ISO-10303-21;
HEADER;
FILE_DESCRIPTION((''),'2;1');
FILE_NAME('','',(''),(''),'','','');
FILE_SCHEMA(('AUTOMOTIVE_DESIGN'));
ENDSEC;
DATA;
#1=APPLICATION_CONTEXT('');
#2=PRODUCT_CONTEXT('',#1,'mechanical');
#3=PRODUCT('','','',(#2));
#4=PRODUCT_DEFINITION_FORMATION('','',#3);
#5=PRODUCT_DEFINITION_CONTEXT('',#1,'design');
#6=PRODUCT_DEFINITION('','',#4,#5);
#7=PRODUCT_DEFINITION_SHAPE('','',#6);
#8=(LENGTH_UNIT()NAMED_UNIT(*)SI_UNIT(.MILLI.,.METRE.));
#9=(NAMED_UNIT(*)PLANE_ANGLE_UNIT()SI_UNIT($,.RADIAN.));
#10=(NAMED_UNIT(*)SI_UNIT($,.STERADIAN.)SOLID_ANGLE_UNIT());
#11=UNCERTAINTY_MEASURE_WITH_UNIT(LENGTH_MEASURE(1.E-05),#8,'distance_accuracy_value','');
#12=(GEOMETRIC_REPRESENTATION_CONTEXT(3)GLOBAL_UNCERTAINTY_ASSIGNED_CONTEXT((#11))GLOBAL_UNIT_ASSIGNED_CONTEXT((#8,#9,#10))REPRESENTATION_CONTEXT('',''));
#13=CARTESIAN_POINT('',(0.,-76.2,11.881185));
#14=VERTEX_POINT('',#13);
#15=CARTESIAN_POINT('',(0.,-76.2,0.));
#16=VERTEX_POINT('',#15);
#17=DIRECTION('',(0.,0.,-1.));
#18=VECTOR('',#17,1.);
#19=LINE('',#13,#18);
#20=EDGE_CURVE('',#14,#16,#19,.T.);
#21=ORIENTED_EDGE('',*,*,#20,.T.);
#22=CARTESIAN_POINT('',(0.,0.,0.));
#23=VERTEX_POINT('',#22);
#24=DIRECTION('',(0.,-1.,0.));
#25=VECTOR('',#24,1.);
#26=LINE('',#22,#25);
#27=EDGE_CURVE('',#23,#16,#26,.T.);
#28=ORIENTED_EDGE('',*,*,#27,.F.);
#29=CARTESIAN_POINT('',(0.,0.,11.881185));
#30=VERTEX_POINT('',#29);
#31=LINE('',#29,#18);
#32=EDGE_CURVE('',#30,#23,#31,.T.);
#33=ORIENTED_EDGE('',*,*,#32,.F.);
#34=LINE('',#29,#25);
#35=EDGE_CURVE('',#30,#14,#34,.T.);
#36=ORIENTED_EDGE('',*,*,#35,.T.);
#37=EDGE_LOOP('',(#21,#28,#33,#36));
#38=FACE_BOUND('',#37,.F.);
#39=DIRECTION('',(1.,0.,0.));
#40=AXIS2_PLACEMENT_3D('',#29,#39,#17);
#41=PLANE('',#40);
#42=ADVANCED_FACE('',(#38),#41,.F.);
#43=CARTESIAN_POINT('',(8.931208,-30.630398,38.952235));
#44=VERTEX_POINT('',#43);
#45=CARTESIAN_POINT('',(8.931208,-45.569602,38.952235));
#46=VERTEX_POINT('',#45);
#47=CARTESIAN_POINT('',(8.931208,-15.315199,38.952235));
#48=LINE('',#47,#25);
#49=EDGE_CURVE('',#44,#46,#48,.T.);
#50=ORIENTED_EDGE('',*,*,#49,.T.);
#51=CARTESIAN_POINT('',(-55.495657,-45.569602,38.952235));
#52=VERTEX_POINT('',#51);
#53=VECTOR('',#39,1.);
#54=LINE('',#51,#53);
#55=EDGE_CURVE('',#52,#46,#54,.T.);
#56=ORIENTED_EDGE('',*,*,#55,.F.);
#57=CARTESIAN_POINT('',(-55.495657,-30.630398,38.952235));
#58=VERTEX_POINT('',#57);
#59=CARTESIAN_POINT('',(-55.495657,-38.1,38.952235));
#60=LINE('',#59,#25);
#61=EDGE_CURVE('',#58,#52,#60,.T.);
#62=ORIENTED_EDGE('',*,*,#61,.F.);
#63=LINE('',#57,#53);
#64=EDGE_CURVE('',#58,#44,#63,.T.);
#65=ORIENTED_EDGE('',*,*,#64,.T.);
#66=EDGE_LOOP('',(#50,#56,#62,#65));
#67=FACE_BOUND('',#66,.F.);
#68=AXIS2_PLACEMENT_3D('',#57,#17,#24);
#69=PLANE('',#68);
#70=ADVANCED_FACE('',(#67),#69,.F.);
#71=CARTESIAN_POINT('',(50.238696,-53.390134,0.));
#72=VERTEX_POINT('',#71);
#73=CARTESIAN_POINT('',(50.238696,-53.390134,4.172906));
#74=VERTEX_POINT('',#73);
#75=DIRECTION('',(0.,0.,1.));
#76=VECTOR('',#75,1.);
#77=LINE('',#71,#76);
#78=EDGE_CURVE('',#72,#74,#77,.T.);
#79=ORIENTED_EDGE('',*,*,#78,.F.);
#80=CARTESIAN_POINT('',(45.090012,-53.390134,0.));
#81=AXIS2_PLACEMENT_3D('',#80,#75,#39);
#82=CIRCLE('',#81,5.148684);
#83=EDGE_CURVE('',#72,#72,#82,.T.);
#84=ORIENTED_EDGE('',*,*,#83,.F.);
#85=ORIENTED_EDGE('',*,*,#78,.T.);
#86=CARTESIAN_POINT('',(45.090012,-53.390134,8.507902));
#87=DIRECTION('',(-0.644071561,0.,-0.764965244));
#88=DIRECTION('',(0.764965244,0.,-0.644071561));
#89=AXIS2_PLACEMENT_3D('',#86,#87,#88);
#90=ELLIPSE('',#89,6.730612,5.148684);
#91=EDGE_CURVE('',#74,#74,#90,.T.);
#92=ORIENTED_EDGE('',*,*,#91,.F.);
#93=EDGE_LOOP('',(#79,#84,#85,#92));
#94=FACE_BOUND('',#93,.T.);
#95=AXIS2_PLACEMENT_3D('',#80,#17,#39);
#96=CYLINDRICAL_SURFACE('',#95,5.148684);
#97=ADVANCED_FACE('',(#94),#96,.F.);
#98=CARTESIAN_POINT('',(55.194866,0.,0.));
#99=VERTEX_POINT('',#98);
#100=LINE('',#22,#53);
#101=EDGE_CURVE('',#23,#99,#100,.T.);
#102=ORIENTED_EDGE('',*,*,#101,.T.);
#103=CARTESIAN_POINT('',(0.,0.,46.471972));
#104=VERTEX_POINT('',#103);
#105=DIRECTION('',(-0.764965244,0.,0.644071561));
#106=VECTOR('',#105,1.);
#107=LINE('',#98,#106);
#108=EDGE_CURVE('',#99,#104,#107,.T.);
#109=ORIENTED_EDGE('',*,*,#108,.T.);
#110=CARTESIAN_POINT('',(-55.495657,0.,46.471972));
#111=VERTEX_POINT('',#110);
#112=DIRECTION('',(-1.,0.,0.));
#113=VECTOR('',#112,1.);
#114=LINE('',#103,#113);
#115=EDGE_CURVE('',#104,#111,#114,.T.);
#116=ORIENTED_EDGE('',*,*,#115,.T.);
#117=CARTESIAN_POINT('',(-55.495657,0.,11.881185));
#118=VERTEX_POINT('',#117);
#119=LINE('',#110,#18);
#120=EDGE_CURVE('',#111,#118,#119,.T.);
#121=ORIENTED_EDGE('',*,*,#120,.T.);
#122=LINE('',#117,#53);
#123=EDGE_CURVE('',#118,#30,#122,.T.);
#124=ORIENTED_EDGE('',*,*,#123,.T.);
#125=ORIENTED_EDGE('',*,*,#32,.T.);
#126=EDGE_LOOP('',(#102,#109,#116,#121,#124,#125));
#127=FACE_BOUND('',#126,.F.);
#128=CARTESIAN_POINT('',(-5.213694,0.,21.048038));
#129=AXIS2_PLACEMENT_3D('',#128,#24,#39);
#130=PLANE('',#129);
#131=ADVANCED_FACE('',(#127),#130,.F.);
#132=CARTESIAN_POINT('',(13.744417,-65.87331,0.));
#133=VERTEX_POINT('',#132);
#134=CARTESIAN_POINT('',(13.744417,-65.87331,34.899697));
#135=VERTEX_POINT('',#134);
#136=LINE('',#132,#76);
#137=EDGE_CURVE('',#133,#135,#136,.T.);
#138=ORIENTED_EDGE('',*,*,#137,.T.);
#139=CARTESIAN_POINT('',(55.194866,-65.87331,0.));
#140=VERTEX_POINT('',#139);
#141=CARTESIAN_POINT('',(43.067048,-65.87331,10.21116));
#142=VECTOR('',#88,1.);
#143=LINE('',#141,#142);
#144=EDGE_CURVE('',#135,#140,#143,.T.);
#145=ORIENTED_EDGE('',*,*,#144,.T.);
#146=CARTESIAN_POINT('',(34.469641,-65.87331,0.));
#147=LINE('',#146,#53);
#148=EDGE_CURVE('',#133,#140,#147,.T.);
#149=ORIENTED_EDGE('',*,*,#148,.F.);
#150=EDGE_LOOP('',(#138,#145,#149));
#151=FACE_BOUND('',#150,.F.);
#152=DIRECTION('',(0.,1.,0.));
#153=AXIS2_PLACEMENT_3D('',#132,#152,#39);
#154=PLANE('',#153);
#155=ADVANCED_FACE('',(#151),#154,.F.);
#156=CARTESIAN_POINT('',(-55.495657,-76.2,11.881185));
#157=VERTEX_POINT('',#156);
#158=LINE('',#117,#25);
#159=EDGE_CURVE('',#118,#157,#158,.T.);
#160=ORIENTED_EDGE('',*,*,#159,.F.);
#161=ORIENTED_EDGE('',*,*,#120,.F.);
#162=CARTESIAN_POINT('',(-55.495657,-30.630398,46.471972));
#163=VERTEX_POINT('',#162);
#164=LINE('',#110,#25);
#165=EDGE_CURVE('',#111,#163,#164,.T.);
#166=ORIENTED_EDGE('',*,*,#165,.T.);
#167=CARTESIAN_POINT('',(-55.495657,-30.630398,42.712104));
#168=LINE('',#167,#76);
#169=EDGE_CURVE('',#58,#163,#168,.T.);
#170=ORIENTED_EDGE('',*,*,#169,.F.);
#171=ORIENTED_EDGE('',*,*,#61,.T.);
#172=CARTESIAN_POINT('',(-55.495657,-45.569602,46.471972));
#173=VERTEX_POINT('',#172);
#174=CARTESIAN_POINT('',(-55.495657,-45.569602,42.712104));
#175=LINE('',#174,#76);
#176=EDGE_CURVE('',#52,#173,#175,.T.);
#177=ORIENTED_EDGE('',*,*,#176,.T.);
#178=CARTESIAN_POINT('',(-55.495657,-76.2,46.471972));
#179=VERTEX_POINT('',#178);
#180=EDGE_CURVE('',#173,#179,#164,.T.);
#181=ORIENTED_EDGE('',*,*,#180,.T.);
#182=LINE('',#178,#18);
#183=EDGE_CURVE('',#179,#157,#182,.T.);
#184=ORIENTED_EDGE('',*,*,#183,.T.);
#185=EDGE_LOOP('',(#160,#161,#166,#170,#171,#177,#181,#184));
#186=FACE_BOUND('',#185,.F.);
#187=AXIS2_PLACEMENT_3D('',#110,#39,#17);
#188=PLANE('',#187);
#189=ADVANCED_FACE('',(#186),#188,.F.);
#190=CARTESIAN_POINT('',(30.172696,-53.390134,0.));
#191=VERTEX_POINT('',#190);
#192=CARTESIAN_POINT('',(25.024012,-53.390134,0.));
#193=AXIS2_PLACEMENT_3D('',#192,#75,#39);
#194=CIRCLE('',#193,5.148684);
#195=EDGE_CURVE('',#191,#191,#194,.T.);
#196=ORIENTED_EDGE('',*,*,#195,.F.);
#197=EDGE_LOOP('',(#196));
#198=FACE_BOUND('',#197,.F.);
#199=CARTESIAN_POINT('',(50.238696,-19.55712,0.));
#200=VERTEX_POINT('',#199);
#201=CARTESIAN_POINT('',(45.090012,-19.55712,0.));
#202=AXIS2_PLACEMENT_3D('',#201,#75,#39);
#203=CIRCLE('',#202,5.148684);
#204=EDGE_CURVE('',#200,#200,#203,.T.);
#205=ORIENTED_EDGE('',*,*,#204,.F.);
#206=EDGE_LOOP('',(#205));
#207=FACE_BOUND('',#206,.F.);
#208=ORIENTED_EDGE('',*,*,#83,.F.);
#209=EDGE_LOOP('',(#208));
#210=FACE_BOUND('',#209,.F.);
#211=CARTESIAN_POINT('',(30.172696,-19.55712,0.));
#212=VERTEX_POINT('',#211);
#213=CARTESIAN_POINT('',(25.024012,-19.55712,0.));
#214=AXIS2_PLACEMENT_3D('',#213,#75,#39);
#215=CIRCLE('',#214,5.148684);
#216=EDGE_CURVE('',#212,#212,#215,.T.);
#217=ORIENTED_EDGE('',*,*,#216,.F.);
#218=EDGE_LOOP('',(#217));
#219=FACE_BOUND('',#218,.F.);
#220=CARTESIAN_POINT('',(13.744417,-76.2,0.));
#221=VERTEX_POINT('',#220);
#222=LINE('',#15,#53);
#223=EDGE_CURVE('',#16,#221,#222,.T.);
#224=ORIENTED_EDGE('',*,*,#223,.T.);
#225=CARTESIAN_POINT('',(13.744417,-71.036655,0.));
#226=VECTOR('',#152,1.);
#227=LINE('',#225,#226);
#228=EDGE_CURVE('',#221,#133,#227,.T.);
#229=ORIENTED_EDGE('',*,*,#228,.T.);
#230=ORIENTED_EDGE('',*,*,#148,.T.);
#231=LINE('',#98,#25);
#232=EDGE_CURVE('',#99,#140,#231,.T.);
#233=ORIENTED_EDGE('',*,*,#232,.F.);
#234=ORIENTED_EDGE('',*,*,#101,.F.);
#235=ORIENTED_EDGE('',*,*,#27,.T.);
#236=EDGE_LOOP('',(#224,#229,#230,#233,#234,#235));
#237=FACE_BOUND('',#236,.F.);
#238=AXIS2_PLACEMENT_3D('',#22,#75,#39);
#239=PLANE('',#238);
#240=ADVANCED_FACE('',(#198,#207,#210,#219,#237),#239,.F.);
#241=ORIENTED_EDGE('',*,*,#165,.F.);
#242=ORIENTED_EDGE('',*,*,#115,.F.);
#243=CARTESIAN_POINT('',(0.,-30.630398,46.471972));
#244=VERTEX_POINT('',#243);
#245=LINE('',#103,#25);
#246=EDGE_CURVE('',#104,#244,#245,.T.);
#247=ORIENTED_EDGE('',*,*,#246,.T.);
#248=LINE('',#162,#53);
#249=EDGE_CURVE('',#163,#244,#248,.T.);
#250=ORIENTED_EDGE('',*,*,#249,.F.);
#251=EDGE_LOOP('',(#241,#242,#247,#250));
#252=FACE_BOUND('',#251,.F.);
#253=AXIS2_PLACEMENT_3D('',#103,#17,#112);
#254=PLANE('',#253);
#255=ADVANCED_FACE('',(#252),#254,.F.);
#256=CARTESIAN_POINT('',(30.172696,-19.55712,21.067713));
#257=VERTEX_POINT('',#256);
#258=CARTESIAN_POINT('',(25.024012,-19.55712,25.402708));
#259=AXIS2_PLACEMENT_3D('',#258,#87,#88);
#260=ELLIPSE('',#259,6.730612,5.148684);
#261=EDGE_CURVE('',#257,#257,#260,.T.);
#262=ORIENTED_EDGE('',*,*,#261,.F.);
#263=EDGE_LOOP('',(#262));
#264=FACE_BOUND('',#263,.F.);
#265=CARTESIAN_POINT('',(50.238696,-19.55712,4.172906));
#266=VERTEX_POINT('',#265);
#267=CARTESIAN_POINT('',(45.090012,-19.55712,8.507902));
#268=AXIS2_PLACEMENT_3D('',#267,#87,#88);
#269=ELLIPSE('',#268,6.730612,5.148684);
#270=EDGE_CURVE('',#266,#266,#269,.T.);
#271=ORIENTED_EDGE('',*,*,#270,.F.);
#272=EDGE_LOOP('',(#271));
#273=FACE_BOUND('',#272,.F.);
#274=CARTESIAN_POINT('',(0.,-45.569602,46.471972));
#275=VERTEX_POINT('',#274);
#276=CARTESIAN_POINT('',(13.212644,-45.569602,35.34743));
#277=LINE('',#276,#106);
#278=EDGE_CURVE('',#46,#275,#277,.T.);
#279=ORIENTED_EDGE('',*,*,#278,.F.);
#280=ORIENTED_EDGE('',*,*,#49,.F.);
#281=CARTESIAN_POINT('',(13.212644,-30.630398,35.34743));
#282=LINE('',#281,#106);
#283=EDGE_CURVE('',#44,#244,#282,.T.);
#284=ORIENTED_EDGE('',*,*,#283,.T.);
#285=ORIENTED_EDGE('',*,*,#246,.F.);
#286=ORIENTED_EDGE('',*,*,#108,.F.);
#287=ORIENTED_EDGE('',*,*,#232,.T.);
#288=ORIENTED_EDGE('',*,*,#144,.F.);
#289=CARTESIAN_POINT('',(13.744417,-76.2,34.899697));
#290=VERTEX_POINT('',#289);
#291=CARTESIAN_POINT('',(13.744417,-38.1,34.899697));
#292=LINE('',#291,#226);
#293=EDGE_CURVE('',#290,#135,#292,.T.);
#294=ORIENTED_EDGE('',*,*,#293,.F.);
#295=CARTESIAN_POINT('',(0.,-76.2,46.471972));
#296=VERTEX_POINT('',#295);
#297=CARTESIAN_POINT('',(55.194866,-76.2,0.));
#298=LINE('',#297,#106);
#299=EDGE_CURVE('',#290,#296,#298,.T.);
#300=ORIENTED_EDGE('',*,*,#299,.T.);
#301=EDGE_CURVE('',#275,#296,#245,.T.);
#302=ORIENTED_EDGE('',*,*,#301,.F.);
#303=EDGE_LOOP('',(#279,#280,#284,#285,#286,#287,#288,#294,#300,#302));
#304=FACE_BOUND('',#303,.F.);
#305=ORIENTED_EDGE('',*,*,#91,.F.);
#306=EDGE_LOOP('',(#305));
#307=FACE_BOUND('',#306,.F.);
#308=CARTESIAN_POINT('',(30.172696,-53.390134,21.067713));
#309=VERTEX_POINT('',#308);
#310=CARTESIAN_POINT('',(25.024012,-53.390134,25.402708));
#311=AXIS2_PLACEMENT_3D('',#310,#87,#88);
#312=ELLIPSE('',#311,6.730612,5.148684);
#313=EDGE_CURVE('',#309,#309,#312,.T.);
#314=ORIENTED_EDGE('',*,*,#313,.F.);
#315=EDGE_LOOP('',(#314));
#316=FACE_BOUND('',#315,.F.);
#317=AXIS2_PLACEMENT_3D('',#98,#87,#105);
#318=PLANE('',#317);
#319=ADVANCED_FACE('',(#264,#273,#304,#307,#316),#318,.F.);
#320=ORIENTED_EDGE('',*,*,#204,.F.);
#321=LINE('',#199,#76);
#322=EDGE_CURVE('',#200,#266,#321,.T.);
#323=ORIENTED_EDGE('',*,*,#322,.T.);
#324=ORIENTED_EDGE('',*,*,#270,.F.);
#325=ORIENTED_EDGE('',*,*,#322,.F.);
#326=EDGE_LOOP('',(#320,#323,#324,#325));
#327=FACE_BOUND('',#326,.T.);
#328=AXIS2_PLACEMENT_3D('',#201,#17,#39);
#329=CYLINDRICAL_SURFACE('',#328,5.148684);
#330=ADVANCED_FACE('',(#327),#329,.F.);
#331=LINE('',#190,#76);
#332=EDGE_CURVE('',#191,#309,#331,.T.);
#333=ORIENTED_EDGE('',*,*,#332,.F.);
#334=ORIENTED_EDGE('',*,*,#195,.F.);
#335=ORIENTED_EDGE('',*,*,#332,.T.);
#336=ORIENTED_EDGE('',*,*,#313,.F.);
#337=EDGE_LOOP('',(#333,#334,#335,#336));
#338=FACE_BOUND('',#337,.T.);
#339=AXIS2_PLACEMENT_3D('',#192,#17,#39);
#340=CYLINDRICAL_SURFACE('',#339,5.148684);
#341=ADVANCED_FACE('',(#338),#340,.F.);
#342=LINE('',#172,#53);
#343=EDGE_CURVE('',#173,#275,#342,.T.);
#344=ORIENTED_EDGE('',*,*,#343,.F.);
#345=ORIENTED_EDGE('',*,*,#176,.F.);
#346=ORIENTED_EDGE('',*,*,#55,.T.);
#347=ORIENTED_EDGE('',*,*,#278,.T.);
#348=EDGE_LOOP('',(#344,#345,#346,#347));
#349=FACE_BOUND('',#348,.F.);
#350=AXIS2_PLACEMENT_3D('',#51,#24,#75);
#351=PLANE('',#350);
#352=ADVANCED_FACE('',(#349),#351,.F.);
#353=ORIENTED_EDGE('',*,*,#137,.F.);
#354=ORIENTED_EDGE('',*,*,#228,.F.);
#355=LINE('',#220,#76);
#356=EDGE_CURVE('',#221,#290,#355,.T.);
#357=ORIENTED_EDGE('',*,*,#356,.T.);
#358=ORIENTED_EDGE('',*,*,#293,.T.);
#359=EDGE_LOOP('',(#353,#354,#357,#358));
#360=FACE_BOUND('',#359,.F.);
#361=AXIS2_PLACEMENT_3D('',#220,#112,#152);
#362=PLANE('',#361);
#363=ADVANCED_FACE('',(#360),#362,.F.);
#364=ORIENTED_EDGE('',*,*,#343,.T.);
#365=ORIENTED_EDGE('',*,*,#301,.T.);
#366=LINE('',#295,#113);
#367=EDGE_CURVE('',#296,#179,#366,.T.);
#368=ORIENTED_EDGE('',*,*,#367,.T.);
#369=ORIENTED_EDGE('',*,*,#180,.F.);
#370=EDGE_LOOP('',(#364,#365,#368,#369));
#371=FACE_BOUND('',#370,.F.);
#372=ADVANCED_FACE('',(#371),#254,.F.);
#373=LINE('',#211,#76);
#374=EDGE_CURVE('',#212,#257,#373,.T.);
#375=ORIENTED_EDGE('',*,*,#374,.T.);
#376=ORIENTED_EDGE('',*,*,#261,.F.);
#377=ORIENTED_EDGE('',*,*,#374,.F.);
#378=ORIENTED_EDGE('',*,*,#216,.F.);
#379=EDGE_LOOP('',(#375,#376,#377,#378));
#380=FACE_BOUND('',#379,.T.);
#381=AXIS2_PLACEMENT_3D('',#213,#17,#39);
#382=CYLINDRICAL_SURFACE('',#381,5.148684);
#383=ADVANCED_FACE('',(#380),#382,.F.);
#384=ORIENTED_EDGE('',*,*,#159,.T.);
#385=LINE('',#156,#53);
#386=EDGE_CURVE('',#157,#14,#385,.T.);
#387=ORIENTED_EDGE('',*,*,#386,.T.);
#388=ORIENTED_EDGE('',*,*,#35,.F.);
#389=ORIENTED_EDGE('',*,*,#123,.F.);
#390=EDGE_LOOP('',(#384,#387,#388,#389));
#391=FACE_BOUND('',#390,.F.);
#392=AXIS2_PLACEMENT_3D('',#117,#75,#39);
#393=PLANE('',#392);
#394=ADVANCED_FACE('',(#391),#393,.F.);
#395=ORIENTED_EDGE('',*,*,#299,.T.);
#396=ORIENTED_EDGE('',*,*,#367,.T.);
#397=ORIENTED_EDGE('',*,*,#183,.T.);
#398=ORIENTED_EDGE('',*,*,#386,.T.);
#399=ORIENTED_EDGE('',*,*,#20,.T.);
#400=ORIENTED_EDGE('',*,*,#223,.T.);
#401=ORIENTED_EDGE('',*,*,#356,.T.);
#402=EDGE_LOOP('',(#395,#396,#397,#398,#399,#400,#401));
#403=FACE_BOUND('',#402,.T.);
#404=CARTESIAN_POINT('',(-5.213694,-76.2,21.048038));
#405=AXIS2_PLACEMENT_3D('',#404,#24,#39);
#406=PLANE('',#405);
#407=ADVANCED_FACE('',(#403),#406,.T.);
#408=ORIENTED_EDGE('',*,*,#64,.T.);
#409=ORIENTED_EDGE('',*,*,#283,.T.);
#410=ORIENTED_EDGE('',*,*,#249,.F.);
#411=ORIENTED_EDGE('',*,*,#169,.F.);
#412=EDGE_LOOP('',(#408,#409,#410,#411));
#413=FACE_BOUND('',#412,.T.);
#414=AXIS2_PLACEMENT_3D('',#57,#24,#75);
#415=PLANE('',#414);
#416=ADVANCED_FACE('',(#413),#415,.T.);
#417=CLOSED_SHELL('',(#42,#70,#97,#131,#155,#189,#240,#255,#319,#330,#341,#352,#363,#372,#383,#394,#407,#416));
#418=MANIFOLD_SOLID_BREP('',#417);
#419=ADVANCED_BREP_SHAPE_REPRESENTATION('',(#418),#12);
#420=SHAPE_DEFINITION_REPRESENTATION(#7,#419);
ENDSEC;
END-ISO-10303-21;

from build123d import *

# Parameters (mm, degrees)
F1_DEPTH = 76.2
F2_W     = 14.9392048001
F2_H     = 7.519736886
F3_DEPTH = 110.691522939
F4_W     = 41.4504492655
F4_H     = 10.3266900301
F4_R     = 5.148684062
F5_DEPTH = 188


# Not quite as in the source:
# - an extrude ends at something that could not be found from the text; its depth is read off the source's solid


with BuildPart() as f1:
    # F0 (on Front) → F1 (new body)
    with BuildSketch(Plane.XZ):
        Polygon((0, 11.8811847642), (0, 0), (55.1948659122, 0), (0, 46.4719720185), (-55.4956570268, 46.4719720185), (-55.4956570268, 11.8811847642), align=None)
    extrude(amount=F1_DEPTH)

    # F2 (on face) → F3 (cut, through all)
    with BuildSketch(Plane(origin=(-55.4956570268, 0, 0), x_dir=(0, -1, 0), z_dir=(-1, 0, 0))):
        with Locations((38.1, 42.7121035755)):
            Rectangle(F2_W, F2_H)
    extrude(amount=-F3_DEPTH, mode=Mode.SUBTRACT)

    # F4 (on Top) → F5 (cut, through all)
    with BuildSketch(Plane.XY):
        with Locations((34.4696412794, -71.036654985)):
            Rectangle(F4_W, F4_H)
        with Locations((45.0900119481, -53.3901341259)):
            Circle(F4_R)
        with Locations((45.0900119481, -19.5571203102)):
            Circle(F4_R)
        with Locations((25.0240119481, -53.3901341259)):
            Circle(F4_R)
        with Locations((25.0240119481, -19.5571203102)):
            Circle(F4_R)
    extrude(amount=F5_DEPTH, mode=Mode.SUBTRACT)


solid = f1.part
